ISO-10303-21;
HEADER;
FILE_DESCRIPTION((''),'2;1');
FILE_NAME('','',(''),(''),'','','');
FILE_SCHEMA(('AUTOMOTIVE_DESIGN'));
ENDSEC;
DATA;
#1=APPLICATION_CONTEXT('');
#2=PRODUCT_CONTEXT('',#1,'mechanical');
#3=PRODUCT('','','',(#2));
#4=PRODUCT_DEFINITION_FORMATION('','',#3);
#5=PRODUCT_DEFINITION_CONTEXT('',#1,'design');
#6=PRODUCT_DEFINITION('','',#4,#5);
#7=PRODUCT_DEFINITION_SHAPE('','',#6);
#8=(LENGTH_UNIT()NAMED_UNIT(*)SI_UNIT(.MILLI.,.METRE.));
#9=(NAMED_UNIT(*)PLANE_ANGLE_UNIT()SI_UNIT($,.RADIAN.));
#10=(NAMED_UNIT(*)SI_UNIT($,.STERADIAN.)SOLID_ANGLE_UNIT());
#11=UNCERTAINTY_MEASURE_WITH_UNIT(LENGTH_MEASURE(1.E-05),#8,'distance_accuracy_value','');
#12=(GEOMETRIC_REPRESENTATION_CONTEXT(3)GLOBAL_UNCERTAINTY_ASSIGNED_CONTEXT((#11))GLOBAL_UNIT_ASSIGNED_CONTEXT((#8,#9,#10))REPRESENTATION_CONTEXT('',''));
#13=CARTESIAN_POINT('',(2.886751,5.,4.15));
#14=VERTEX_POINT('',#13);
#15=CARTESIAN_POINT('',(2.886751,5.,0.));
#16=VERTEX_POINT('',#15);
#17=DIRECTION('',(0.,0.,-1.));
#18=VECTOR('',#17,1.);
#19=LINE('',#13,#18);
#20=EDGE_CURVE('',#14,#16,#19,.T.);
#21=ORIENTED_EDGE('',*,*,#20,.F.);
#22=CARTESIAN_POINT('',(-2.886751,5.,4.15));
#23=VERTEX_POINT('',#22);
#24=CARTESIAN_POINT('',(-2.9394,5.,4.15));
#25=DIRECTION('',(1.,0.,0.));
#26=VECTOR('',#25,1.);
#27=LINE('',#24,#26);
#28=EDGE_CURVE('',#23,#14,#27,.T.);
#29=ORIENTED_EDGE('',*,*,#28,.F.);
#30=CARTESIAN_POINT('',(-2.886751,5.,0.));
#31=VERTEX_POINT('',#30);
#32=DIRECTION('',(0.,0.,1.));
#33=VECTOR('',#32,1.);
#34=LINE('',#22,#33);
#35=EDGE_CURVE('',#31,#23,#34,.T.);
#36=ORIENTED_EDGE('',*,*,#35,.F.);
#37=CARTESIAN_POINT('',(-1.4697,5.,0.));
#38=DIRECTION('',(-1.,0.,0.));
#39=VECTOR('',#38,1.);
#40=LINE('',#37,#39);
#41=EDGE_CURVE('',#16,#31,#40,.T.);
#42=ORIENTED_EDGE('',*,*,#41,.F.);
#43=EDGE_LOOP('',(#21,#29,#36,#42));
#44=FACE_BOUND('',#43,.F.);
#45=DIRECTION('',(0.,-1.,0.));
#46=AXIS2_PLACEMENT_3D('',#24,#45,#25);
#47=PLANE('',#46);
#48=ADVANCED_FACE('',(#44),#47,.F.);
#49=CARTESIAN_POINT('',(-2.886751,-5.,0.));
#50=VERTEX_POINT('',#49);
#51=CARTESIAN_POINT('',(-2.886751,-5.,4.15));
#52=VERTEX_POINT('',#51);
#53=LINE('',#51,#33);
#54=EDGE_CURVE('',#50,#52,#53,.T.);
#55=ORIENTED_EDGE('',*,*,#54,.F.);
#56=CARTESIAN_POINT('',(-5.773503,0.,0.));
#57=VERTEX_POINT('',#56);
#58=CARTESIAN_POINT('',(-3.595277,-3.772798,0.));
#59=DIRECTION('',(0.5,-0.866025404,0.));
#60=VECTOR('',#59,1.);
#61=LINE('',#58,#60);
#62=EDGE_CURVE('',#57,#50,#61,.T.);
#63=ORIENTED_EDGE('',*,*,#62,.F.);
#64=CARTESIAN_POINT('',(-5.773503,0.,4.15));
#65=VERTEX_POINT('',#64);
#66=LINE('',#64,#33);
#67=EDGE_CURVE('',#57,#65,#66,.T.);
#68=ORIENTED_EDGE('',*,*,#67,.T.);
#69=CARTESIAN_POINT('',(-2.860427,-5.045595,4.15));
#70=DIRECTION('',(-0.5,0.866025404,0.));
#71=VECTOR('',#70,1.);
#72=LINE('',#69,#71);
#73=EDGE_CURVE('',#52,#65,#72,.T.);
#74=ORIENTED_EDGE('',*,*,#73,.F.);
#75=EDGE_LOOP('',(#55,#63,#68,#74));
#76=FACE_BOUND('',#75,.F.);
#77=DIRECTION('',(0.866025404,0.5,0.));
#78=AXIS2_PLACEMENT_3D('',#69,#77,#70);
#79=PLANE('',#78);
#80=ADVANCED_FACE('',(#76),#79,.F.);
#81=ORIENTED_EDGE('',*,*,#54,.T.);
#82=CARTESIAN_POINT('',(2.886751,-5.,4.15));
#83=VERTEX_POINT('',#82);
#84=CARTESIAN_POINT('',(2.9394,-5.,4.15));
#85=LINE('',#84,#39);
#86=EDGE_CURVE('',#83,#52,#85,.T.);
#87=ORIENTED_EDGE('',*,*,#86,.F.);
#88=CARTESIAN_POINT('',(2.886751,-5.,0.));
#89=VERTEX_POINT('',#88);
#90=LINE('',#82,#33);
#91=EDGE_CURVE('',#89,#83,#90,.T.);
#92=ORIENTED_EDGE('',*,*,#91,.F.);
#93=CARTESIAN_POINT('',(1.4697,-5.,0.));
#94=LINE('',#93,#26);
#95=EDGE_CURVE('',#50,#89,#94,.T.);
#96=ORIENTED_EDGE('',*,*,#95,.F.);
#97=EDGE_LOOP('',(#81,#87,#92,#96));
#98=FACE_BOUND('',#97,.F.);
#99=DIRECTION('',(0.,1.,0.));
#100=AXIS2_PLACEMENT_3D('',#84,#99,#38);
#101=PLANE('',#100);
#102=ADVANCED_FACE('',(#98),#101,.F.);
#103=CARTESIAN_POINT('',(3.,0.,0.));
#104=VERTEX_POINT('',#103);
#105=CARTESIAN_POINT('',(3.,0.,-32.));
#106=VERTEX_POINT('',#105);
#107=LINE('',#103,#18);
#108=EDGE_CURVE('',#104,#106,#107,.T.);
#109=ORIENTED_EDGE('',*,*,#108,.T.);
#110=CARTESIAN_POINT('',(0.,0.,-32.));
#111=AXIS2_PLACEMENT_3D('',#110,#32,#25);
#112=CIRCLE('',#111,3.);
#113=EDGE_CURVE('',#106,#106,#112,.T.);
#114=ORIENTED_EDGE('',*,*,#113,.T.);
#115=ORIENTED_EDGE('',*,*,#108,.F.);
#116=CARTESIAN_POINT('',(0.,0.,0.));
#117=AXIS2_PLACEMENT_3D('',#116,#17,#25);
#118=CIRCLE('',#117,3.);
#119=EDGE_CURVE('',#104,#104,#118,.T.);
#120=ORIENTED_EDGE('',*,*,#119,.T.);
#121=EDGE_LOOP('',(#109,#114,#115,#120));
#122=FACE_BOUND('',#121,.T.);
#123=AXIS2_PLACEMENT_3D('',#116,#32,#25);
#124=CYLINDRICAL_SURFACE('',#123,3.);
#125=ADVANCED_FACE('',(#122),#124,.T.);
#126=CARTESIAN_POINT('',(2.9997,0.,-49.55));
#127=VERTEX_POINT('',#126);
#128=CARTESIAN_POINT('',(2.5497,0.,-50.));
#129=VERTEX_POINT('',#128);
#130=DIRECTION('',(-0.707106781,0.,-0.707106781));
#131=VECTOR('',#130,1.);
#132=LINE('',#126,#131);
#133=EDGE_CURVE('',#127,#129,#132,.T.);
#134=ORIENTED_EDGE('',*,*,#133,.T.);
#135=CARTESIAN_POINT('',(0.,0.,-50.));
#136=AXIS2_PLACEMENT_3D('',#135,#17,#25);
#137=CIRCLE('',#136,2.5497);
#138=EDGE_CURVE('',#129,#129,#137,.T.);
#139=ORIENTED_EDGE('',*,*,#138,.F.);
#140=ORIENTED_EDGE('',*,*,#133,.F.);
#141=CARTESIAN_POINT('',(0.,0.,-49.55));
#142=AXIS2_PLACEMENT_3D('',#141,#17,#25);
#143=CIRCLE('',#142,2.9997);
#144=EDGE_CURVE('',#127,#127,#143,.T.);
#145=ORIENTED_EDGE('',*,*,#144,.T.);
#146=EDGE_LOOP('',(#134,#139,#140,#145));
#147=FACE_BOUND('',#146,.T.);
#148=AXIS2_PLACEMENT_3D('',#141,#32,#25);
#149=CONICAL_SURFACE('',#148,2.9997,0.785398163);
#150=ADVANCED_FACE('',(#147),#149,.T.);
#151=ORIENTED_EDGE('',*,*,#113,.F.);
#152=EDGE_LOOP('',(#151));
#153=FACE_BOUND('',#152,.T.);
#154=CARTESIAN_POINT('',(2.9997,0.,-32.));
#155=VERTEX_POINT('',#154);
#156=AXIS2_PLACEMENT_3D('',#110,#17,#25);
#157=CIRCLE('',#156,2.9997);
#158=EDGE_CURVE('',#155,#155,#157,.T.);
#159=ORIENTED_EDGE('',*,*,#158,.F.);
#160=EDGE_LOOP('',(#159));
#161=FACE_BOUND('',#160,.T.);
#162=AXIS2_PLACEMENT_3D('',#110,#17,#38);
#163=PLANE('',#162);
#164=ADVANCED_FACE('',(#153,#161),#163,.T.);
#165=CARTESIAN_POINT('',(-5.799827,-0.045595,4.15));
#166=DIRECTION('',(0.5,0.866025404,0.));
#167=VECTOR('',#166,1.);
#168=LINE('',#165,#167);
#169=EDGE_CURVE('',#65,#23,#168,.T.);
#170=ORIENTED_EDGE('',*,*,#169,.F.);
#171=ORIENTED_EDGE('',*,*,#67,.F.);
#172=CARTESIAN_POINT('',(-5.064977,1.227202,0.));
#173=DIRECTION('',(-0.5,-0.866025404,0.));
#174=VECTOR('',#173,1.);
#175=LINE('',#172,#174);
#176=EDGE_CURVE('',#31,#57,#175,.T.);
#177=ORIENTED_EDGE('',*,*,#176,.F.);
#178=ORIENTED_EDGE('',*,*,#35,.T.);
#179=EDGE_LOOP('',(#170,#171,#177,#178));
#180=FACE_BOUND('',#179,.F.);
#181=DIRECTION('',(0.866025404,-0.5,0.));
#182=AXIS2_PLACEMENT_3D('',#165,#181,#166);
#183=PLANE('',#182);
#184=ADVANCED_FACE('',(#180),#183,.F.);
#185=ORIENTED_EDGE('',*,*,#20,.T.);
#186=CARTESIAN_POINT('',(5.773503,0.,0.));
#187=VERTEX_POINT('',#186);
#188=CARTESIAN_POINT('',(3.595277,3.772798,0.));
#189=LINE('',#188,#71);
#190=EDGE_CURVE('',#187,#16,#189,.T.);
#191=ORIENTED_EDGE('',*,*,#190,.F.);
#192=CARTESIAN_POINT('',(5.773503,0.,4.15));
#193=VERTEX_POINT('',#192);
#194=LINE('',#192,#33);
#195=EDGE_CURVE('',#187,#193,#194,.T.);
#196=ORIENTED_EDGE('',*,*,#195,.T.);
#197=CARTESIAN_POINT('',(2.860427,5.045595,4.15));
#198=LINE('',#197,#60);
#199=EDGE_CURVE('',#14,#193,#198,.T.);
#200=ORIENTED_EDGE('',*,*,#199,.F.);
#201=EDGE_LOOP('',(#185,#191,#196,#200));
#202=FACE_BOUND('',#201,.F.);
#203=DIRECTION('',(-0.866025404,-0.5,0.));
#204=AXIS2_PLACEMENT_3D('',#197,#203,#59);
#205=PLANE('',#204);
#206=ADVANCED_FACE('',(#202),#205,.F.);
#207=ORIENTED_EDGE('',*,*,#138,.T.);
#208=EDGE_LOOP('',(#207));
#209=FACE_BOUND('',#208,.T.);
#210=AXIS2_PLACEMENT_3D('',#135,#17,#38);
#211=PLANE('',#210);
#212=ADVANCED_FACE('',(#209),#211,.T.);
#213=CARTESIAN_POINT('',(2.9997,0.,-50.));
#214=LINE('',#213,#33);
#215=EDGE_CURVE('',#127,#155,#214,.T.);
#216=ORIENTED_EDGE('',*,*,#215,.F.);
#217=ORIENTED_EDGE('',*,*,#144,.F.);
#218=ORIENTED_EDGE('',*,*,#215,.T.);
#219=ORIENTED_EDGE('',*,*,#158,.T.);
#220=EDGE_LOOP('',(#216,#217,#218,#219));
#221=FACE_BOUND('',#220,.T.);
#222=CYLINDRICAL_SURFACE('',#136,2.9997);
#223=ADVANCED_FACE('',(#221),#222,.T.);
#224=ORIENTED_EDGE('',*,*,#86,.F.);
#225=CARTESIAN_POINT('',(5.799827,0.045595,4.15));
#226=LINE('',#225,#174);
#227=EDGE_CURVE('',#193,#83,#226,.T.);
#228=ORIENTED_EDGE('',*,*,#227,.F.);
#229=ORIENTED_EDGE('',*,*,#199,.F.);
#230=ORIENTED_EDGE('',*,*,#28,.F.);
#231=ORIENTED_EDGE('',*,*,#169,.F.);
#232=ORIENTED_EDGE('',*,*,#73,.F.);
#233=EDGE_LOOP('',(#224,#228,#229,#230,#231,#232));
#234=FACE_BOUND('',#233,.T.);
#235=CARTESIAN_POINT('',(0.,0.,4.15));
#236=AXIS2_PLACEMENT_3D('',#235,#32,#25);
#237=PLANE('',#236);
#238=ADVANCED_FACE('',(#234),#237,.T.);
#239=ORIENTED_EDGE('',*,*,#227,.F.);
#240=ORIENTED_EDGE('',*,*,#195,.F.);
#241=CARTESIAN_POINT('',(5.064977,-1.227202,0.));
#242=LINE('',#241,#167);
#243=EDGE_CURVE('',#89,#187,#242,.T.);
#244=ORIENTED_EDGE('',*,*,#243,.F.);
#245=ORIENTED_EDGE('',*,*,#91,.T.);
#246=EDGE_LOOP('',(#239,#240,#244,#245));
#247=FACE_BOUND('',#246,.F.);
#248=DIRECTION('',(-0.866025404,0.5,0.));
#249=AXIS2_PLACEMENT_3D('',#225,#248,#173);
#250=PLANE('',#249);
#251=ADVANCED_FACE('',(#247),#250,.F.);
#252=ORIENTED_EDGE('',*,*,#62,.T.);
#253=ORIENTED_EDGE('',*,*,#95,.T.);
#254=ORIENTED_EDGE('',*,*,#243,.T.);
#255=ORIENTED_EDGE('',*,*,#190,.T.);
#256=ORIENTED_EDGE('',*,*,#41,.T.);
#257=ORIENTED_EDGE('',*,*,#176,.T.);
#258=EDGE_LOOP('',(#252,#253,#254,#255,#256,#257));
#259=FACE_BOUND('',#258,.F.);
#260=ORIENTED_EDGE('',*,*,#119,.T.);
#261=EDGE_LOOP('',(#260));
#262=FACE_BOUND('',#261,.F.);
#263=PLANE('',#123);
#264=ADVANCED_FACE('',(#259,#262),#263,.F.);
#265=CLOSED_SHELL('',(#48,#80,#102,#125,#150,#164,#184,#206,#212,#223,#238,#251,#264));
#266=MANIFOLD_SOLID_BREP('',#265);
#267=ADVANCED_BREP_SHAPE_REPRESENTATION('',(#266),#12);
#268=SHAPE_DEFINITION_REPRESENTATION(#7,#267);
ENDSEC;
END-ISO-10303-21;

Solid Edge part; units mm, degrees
sketch "Sketch1" plane through (0, 0, 0) normal (0, 0, 1) x (1, 0, 0)
  circle A0 centre (0, 0) radius 5.8
  dimension "D1" = 11.6
extrude "Protrusion1" add sketch "Sketch1" along normal blind 4.15
sketch "Sketch2" plane through (0, 0, 0) normal (0, 0, -1) x (1, 0, 0)
  circle A0 centre (0, 0) radius 3
extrude "Protrusion2" add sketch "Sketch2" along normal blind 50
sketch "Sketch3" plane through (0, 0, -50) normal (0, 0, -1) x (1, 0, 0)
  circle A0 centre (0, 0) radius 2.9997
extrude "Cutout1" cut sketch "Sketch3" against normal blind 18 flip side to cut
chamfer "Chamfer_1" distance 0.45 angle 45 1 edges at (-2.9997, 0, -50)
sketch "Sketch4" plane through (0, 0, 4.15) normal (0, 0, 1) x (1, 0, 0)
  line L0 (-2.9394, 5) -> (2.9394, 5)
  dimension "D1" = 10
extrude "Cutout2" cut sketch "Sketch4" against normal up to next material side at (0, 5.05, 4.15)
pattern_circular "Pattern1" count 6 over 360 about axis through (0, 0, 4.15) along (0, 0, 1) of "Cutout2"
properties part number "24104784"
